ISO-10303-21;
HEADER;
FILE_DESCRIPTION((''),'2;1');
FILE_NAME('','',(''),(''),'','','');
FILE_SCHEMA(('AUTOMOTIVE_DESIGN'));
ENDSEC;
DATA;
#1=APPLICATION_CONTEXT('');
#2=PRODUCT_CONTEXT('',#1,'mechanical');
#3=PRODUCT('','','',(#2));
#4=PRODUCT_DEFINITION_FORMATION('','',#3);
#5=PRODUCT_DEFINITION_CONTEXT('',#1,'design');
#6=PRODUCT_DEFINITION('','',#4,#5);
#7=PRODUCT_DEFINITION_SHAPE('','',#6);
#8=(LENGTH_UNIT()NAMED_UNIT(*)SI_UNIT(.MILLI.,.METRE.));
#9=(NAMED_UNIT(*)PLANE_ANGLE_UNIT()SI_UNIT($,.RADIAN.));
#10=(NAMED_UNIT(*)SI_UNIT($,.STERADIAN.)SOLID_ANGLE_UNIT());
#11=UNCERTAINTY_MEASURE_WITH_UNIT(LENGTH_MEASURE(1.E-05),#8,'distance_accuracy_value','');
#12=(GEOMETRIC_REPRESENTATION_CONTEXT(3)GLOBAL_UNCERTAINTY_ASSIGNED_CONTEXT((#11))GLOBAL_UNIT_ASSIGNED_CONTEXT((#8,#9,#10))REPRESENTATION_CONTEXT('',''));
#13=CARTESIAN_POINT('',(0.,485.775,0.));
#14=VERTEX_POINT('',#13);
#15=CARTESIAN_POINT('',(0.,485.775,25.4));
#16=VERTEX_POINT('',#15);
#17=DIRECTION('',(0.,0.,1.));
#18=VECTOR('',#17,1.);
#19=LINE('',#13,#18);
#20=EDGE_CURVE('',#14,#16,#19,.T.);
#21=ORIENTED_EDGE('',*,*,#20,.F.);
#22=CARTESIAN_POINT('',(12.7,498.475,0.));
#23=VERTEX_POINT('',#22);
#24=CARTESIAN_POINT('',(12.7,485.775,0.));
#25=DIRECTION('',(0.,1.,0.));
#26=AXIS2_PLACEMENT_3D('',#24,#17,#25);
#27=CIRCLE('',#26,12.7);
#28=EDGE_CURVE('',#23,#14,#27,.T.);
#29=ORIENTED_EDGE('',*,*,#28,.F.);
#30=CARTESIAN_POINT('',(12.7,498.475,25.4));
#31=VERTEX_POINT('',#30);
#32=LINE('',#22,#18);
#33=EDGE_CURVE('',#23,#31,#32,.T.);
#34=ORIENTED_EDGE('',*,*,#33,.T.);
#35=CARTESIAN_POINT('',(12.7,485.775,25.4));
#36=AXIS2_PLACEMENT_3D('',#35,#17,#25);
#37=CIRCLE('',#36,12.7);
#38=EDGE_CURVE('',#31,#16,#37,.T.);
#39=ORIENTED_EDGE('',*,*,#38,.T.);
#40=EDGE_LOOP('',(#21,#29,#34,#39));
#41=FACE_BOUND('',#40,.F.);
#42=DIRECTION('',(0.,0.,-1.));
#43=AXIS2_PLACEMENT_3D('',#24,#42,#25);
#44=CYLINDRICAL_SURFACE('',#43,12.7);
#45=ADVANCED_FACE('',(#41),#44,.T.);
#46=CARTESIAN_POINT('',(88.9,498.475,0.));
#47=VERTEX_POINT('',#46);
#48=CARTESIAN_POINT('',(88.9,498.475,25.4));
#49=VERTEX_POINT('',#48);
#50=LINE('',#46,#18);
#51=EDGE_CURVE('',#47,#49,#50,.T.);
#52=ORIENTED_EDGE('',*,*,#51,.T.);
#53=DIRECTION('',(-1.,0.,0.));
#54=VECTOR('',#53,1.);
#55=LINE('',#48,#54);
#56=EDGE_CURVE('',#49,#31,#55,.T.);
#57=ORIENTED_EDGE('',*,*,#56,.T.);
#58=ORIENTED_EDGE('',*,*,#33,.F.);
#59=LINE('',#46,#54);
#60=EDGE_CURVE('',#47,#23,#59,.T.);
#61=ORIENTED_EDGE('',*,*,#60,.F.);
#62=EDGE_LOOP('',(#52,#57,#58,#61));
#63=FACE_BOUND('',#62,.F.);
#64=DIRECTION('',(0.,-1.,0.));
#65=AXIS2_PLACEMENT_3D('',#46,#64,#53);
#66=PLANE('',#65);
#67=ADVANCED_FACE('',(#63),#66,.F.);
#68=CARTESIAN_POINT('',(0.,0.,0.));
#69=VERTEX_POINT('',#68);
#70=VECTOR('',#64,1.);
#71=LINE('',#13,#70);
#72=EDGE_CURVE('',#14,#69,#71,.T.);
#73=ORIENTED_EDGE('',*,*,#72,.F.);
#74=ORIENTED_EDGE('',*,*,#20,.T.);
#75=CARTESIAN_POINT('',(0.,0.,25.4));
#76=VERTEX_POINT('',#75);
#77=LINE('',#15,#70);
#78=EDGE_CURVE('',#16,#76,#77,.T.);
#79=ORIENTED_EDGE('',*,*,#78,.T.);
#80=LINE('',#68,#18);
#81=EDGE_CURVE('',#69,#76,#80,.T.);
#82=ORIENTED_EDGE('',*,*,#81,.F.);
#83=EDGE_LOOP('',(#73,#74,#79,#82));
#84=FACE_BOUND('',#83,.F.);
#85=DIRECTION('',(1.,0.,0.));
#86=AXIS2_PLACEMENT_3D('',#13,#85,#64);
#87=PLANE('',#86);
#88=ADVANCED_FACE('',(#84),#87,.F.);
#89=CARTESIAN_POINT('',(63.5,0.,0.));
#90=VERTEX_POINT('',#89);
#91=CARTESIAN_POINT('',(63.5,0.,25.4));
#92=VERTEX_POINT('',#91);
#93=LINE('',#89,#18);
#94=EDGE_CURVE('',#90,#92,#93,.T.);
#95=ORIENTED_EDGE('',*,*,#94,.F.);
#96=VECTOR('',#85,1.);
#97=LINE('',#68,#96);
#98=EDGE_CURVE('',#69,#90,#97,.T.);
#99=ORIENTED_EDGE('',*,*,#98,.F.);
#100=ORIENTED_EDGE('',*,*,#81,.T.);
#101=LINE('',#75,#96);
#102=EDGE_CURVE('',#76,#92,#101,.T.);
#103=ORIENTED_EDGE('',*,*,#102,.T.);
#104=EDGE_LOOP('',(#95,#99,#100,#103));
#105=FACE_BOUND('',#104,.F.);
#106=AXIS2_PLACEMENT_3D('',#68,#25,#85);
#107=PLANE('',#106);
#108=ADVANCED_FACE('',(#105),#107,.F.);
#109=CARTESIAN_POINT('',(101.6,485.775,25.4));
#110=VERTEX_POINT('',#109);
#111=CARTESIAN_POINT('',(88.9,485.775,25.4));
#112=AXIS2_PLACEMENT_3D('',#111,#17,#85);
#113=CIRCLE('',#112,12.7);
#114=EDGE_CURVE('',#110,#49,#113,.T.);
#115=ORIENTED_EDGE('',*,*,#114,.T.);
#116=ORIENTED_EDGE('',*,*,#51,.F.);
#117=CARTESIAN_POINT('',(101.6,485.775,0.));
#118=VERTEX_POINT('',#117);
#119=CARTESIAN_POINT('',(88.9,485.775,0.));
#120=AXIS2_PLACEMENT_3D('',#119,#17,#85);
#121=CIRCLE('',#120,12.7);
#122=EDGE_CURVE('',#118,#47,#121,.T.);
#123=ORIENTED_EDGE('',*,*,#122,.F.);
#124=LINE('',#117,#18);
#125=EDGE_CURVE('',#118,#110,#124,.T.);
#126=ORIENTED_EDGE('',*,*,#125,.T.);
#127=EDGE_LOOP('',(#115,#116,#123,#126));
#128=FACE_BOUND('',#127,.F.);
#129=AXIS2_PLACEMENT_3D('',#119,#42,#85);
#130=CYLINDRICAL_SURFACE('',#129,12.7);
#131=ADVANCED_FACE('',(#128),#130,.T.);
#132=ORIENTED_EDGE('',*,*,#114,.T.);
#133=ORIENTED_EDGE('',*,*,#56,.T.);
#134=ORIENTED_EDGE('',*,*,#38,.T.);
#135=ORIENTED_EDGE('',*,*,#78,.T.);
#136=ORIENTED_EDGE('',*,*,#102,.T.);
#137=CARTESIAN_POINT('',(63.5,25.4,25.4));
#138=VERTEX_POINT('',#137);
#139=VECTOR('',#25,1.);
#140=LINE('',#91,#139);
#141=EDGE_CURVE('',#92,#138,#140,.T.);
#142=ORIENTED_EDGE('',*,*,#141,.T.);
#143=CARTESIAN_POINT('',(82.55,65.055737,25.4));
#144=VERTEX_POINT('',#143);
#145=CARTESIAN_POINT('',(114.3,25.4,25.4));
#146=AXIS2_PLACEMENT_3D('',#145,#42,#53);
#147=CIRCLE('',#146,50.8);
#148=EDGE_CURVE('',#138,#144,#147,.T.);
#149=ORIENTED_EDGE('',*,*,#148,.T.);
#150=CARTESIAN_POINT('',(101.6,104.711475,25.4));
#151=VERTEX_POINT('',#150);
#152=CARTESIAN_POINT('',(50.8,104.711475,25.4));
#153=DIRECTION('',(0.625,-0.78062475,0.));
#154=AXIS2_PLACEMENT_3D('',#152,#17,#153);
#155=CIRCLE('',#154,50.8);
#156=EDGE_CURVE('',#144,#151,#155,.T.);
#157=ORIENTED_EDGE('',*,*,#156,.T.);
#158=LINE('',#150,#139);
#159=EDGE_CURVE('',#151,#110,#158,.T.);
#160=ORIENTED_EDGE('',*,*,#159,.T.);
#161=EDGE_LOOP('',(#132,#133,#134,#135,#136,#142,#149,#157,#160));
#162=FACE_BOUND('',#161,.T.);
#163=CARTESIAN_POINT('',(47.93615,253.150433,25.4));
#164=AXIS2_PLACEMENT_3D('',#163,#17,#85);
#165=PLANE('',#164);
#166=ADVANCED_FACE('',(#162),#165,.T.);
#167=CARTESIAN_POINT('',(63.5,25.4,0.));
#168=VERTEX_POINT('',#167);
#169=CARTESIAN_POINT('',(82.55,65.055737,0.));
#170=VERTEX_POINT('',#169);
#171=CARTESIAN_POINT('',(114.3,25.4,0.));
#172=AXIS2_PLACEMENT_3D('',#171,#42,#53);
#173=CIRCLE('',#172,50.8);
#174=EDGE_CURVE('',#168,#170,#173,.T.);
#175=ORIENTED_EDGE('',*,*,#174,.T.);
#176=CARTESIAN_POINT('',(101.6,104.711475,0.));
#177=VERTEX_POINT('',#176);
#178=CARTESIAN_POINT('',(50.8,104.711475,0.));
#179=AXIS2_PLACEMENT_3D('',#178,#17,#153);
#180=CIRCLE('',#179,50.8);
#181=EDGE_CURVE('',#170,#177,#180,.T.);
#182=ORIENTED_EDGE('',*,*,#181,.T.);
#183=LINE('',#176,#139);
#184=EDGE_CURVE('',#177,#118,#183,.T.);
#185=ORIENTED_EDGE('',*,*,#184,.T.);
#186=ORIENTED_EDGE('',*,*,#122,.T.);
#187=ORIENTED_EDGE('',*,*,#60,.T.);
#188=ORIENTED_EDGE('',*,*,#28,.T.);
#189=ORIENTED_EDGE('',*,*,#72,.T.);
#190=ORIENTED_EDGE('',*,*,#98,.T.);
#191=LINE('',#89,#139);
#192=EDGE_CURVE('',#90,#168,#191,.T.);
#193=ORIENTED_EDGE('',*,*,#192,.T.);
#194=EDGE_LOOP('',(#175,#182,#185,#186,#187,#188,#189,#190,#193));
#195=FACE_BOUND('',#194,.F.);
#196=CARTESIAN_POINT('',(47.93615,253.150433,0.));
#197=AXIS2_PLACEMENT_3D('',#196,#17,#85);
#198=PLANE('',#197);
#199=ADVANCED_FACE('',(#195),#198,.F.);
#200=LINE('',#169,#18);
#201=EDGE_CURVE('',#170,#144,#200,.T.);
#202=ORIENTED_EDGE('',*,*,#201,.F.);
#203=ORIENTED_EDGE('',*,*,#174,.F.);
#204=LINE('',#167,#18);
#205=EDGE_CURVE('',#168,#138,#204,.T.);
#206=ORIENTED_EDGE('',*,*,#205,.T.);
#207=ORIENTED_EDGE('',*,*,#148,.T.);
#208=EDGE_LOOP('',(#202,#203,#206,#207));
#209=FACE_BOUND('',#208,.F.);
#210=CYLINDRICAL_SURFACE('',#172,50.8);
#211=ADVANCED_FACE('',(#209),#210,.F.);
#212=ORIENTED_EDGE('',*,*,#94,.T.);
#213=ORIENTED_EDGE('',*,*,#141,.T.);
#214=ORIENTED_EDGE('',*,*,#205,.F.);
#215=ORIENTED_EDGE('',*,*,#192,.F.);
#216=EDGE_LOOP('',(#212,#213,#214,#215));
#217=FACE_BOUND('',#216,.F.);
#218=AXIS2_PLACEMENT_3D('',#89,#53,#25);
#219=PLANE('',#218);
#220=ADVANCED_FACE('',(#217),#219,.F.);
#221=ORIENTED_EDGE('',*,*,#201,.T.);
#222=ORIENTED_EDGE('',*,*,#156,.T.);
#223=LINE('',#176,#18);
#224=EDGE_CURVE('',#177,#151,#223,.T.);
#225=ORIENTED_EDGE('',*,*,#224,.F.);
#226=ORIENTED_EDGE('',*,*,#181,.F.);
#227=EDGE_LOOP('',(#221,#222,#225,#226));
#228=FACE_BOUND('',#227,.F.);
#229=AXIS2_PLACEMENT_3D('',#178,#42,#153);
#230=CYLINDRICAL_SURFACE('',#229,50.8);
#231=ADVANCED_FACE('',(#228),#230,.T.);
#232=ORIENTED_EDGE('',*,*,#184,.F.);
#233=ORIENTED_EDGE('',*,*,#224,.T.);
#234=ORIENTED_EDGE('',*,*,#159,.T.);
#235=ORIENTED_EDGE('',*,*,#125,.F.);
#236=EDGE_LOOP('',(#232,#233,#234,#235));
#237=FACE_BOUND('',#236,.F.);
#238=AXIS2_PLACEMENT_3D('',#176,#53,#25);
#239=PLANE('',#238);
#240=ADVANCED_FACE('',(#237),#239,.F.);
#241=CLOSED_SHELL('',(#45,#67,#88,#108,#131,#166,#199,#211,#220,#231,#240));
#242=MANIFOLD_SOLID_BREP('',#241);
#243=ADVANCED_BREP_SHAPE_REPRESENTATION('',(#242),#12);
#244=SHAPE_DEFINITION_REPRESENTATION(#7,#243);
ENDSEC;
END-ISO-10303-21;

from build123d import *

# Parameters (mm, degrees)
F1_DEPTH = 25.4


# Not quite as in the source:
# - a feature of the source that left no trace in its solid (it failed there, or was rolled back) is left out


with BuildPart() as f1:
    # F0 (on Top) → F1 (new body)
    with BuildSketch(Plane.XY):
        with BuildLine():
            Line((0, 485.775), (0, 0))
            Line((0, 0), (63.5, 0))
            Line((63.5, 0), (63.5, 25.4))
            ThreePointArc((63.5, 25.4), (68.5094988016, 47.3970452561), (82.55, 65.0557372898))
            ThreePointArc((82.55, 65.0557372898), (96.5905011984, 82.7144293235), (101.6, 104.7114745797))
            Line((101.6, 104.7114745797), (101.6, 485.775))
            ThreePointArc((101.6, 485.775), (97.8802561211, 494.7552561211), (88.9, 498.475))
            Line((88.9, 498.475), (12.7, 498.475))
            ThreePointArc((12.7, 498.475), (3.7197438789, 494.7552561211), (0, 485.775))
        make_face()
    extrude(amount=F1_DEPTH)


solid = f1.part
